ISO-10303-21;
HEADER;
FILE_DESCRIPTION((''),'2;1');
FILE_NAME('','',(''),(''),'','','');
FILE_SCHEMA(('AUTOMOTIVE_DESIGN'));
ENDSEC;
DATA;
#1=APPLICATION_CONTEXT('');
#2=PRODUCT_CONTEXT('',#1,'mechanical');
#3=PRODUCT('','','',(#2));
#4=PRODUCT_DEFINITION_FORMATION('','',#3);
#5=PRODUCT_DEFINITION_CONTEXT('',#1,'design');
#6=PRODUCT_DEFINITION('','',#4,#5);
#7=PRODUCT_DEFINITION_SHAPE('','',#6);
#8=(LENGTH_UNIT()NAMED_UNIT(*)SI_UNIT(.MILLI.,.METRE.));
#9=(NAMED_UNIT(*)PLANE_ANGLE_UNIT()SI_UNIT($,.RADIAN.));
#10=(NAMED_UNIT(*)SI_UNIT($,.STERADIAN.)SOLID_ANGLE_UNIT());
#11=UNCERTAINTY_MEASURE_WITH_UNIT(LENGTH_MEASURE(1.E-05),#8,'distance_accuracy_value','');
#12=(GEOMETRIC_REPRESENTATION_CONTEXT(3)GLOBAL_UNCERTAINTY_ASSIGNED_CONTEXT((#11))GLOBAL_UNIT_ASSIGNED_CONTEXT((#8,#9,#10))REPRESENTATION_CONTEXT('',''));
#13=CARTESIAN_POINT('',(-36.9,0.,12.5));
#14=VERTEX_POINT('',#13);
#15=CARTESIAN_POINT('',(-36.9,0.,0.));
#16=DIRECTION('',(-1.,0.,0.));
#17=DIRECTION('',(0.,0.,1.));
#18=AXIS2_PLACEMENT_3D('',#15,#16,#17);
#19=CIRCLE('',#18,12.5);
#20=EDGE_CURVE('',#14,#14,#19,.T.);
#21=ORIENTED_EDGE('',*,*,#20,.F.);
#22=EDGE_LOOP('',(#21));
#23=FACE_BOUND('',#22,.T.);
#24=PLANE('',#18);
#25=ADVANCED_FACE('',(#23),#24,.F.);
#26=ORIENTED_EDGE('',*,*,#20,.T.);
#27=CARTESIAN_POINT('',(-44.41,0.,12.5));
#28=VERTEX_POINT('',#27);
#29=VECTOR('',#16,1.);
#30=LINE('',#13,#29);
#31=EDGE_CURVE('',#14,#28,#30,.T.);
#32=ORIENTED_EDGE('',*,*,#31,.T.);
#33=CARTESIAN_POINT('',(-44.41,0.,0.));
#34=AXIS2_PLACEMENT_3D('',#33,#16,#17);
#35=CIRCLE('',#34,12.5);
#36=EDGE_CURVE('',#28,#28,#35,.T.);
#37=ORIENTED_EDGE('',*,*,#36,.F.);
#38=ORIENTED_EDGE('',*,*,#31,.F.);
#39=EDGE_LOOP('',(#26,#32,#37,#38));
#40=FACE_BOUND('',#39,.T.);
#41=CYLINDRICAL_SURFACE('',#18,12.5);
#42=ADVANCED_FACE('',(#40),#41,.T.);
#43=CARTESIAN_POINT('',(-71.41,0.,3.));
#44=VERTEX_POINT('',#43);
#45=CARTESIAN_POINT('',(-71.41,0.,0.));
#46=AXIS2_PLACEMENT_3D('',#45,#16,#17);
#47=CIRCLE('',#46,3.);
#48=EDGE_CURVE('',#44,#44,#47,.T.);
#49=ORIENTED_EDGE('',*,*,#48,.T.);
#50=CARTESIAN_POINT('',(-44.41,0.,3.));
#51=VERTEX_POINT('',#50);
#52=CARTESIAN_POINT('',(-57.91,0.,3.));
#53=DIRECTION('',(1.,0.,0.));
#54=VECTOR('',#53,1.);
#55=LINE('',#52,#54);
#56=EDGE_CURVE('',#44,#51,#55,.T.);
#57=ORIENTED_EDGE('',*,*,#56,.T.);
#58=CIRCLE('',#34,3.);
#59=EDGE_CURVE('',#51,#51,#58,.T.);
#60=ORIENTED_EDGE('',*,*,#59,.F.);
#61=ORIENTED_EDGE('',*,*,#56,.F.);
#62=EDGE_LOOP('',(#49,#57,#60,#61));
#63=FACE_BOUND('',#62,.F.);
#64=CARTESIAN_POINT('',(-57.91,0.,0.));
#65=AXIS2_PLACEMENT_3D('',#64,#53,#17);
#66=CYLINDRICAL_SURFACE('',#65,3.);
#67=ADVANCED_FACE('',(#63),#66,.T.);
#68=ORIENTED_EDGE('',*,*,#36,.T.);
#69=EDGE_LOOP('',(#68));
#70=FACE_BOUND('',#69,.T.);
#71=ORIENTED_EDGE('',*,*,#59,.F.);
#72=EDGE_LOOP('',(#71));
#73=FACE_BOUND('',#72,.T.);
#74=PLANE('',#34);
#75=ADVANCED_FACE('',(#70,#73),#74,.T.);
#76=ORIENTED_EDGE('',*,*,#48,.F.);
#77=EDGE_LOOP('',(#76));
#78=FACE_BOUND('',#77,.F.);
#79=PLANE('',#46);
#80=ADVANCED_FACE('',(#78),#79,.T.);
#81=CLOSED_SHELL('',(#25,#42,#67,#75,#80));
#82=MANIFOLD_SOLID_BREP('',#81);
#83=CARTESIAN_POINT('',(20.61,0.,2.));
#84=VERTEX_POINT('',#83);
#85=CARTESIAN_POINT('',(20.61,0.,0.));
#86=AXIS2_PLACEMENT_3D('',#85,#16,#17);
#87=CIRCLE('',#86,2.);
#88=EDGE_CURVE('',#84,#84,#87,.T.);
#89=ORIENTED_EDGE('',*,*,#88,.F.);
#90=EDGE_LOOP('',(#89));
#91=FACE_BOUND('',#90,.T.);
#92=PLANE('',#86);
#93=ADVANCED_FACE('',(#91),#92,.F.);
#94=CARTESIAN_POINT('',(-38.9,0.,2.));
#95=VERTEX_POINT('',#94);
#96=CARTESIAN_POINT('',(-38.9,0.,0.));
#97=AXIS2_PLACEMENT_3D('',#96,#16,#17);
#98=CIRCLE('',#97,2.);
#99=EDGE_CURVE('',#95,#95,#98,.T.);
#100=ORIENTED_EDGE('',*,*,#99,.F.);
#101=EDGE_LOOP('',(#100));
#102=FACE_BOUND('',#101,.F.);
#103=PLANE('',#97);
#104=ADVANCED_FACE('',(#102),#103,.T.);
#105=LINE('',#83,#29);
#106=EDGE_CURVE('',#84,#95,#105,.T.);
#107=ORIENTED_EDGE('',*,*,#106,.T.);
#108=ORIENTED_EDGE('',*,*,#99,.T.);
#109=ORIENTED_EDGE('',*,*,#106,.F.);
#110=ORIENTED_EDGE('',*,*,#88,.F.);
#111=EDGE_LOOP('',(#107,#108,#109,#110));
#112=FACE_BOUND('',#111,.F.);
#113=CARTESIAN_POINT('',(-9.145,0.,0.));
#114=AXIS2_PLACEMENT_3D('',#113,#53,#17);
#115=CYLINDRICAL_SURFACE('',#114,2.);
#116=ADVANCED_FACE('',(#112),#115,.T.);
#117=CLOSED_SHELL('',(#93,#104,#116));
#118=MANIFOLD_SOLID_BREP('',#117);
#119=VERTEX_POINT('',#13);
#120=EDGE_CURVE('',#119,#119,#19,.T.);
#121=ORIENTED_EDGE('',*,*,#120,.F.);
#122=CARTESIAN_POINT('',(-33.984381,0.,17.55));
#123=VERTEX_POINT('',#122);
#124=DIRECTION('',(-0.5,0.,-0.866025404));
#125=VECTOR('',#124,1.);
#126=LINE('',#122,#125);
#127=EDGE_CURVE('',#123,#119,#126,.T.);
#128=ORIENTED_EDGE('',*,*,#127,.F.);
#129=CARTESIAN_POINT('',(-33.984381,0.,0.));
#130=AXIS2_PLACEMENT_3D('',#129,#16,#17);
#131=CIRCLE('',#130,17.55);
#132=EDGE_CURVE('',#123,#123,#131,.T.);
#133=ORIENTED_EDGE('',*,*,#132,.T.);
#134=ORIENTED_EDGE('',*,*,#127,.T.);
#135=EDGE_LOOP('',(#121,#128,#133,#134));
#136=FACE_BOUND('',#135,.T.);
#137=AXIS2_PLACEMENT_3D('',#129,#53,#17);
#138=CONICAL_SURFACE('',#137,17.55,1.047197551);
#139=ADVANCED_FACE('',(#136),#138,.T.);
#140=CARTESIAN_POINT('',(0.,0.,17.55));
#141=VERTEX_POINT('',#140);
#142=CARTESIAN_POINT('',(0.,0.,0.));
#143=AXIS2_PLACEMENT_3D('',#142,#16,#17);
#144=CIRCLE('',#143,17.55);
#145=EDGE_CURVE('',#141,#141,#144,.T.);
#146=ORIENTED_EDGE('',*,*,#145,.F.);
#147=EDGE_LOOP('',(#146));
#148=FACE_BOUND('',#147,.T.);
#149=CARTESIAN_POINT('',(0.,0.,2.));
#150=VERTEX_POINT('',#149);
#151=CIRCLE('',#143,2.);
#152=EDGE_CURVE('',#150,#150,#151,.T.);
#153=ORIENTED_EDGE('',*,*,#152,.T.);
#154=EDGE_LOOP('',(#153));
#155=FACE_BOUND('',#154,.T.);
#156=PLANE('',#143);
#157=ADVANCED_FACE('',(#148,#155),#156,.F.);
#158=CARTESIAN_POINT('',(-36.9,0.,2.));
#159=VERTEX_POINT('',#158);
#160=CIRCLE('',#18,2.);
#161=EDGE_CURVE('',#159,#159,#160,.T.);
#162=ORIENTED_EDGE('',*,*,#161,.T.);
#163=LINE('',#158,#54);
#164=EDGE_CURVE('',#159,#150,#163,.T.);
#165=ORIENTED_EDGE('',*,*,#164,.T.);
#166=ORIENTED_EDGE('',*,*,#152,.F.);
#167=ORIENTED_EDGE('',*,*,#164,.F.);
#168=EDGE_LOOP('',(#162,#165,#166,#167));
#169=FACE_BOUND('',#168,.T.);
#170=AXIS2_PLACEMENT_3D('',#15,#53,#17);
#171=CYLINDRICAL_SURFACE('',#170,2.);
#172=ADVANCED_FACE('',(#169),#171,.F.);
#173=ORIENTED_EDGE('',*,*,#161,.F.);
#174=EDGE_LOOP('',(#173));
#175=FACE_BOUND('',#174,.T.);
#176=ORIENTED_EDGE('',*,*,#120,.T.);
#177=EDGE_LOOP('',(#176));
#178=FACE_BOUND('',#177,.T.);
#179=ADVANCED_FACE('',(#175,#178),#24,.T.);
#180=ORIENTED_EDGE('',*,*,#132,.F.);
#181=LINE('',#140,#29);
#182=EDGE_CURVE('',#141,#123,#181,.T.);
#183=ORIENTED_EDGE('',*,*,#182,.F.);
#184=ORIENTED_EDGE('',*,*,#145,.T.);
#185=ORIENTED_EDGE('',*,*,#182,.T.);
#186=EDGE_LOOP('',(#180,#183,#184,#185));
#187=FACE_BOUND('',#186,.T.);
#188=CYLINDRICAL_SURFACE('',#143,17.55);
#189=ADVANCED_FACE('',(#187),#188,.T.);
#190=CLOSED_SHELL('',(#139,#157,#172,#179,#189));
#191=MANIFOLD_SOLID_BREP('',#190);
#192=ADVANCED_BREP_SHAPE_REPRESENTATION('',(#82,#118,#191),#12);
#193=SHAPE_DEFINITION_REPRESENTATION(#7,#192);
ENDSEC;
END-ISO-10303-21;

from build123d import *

# Parameters (mm, degrees)
F1_W = 20.61
F1_H = 2
F2_W = 59.51
F2_H = 2
F3_W = 27
F3_H = 3


with BuildPart() as f4:
    # F1 (on Front) → F4 (revolve)
    with BuildSketch(Plane.XZ):
        with Locations((10.305, 1)):
            Rectangle(F1_W, F1_H)
    revolve(axis=Axis((-25.4, 0, 0), (-1, 0, 0)))

    # F2 (on Front) → F5 (revolve)
    with BuildSketch(Plane.XZ):
        with Locations((-9.145, 1)):
            Rectangle(F2_W, F2_H)
    revolve(axis=Axis((-25.4, 0, 0), (-1, 0, 0)))


with BuildPart() as f4b:
    # F1 (on Front) → F4, piece 2 (revolve)
    with BuildSketch(Plane.XZ):
        Polygon((0, 17.55), (-33.9843811406, 17.55), (-36.9, 12.5), (-36.9, 2), (0, 2), align=None)
    revolve(axis=Axis((-25.4, 0, 0), (-1, 0, 0)))


with BuildPart() as f6:
    # F3 (on Front) → F6 (revolve)
    with BuildSketch(Plane.XZ):
        with Locations((-57.91, 1.5)):
            Rectangle(F3_W, F3_H)
        Polygon((-36.9, 12.5), (-44.41, 12.5), (-44.41, 3), (-44.41, 0), (-36.9, 0), align=None)
    revolve(axis=Axis((-25.4, 0, 0), (-1, 0, 0)))


solid = Compound([f4.part, f4b.part, f6.part])
